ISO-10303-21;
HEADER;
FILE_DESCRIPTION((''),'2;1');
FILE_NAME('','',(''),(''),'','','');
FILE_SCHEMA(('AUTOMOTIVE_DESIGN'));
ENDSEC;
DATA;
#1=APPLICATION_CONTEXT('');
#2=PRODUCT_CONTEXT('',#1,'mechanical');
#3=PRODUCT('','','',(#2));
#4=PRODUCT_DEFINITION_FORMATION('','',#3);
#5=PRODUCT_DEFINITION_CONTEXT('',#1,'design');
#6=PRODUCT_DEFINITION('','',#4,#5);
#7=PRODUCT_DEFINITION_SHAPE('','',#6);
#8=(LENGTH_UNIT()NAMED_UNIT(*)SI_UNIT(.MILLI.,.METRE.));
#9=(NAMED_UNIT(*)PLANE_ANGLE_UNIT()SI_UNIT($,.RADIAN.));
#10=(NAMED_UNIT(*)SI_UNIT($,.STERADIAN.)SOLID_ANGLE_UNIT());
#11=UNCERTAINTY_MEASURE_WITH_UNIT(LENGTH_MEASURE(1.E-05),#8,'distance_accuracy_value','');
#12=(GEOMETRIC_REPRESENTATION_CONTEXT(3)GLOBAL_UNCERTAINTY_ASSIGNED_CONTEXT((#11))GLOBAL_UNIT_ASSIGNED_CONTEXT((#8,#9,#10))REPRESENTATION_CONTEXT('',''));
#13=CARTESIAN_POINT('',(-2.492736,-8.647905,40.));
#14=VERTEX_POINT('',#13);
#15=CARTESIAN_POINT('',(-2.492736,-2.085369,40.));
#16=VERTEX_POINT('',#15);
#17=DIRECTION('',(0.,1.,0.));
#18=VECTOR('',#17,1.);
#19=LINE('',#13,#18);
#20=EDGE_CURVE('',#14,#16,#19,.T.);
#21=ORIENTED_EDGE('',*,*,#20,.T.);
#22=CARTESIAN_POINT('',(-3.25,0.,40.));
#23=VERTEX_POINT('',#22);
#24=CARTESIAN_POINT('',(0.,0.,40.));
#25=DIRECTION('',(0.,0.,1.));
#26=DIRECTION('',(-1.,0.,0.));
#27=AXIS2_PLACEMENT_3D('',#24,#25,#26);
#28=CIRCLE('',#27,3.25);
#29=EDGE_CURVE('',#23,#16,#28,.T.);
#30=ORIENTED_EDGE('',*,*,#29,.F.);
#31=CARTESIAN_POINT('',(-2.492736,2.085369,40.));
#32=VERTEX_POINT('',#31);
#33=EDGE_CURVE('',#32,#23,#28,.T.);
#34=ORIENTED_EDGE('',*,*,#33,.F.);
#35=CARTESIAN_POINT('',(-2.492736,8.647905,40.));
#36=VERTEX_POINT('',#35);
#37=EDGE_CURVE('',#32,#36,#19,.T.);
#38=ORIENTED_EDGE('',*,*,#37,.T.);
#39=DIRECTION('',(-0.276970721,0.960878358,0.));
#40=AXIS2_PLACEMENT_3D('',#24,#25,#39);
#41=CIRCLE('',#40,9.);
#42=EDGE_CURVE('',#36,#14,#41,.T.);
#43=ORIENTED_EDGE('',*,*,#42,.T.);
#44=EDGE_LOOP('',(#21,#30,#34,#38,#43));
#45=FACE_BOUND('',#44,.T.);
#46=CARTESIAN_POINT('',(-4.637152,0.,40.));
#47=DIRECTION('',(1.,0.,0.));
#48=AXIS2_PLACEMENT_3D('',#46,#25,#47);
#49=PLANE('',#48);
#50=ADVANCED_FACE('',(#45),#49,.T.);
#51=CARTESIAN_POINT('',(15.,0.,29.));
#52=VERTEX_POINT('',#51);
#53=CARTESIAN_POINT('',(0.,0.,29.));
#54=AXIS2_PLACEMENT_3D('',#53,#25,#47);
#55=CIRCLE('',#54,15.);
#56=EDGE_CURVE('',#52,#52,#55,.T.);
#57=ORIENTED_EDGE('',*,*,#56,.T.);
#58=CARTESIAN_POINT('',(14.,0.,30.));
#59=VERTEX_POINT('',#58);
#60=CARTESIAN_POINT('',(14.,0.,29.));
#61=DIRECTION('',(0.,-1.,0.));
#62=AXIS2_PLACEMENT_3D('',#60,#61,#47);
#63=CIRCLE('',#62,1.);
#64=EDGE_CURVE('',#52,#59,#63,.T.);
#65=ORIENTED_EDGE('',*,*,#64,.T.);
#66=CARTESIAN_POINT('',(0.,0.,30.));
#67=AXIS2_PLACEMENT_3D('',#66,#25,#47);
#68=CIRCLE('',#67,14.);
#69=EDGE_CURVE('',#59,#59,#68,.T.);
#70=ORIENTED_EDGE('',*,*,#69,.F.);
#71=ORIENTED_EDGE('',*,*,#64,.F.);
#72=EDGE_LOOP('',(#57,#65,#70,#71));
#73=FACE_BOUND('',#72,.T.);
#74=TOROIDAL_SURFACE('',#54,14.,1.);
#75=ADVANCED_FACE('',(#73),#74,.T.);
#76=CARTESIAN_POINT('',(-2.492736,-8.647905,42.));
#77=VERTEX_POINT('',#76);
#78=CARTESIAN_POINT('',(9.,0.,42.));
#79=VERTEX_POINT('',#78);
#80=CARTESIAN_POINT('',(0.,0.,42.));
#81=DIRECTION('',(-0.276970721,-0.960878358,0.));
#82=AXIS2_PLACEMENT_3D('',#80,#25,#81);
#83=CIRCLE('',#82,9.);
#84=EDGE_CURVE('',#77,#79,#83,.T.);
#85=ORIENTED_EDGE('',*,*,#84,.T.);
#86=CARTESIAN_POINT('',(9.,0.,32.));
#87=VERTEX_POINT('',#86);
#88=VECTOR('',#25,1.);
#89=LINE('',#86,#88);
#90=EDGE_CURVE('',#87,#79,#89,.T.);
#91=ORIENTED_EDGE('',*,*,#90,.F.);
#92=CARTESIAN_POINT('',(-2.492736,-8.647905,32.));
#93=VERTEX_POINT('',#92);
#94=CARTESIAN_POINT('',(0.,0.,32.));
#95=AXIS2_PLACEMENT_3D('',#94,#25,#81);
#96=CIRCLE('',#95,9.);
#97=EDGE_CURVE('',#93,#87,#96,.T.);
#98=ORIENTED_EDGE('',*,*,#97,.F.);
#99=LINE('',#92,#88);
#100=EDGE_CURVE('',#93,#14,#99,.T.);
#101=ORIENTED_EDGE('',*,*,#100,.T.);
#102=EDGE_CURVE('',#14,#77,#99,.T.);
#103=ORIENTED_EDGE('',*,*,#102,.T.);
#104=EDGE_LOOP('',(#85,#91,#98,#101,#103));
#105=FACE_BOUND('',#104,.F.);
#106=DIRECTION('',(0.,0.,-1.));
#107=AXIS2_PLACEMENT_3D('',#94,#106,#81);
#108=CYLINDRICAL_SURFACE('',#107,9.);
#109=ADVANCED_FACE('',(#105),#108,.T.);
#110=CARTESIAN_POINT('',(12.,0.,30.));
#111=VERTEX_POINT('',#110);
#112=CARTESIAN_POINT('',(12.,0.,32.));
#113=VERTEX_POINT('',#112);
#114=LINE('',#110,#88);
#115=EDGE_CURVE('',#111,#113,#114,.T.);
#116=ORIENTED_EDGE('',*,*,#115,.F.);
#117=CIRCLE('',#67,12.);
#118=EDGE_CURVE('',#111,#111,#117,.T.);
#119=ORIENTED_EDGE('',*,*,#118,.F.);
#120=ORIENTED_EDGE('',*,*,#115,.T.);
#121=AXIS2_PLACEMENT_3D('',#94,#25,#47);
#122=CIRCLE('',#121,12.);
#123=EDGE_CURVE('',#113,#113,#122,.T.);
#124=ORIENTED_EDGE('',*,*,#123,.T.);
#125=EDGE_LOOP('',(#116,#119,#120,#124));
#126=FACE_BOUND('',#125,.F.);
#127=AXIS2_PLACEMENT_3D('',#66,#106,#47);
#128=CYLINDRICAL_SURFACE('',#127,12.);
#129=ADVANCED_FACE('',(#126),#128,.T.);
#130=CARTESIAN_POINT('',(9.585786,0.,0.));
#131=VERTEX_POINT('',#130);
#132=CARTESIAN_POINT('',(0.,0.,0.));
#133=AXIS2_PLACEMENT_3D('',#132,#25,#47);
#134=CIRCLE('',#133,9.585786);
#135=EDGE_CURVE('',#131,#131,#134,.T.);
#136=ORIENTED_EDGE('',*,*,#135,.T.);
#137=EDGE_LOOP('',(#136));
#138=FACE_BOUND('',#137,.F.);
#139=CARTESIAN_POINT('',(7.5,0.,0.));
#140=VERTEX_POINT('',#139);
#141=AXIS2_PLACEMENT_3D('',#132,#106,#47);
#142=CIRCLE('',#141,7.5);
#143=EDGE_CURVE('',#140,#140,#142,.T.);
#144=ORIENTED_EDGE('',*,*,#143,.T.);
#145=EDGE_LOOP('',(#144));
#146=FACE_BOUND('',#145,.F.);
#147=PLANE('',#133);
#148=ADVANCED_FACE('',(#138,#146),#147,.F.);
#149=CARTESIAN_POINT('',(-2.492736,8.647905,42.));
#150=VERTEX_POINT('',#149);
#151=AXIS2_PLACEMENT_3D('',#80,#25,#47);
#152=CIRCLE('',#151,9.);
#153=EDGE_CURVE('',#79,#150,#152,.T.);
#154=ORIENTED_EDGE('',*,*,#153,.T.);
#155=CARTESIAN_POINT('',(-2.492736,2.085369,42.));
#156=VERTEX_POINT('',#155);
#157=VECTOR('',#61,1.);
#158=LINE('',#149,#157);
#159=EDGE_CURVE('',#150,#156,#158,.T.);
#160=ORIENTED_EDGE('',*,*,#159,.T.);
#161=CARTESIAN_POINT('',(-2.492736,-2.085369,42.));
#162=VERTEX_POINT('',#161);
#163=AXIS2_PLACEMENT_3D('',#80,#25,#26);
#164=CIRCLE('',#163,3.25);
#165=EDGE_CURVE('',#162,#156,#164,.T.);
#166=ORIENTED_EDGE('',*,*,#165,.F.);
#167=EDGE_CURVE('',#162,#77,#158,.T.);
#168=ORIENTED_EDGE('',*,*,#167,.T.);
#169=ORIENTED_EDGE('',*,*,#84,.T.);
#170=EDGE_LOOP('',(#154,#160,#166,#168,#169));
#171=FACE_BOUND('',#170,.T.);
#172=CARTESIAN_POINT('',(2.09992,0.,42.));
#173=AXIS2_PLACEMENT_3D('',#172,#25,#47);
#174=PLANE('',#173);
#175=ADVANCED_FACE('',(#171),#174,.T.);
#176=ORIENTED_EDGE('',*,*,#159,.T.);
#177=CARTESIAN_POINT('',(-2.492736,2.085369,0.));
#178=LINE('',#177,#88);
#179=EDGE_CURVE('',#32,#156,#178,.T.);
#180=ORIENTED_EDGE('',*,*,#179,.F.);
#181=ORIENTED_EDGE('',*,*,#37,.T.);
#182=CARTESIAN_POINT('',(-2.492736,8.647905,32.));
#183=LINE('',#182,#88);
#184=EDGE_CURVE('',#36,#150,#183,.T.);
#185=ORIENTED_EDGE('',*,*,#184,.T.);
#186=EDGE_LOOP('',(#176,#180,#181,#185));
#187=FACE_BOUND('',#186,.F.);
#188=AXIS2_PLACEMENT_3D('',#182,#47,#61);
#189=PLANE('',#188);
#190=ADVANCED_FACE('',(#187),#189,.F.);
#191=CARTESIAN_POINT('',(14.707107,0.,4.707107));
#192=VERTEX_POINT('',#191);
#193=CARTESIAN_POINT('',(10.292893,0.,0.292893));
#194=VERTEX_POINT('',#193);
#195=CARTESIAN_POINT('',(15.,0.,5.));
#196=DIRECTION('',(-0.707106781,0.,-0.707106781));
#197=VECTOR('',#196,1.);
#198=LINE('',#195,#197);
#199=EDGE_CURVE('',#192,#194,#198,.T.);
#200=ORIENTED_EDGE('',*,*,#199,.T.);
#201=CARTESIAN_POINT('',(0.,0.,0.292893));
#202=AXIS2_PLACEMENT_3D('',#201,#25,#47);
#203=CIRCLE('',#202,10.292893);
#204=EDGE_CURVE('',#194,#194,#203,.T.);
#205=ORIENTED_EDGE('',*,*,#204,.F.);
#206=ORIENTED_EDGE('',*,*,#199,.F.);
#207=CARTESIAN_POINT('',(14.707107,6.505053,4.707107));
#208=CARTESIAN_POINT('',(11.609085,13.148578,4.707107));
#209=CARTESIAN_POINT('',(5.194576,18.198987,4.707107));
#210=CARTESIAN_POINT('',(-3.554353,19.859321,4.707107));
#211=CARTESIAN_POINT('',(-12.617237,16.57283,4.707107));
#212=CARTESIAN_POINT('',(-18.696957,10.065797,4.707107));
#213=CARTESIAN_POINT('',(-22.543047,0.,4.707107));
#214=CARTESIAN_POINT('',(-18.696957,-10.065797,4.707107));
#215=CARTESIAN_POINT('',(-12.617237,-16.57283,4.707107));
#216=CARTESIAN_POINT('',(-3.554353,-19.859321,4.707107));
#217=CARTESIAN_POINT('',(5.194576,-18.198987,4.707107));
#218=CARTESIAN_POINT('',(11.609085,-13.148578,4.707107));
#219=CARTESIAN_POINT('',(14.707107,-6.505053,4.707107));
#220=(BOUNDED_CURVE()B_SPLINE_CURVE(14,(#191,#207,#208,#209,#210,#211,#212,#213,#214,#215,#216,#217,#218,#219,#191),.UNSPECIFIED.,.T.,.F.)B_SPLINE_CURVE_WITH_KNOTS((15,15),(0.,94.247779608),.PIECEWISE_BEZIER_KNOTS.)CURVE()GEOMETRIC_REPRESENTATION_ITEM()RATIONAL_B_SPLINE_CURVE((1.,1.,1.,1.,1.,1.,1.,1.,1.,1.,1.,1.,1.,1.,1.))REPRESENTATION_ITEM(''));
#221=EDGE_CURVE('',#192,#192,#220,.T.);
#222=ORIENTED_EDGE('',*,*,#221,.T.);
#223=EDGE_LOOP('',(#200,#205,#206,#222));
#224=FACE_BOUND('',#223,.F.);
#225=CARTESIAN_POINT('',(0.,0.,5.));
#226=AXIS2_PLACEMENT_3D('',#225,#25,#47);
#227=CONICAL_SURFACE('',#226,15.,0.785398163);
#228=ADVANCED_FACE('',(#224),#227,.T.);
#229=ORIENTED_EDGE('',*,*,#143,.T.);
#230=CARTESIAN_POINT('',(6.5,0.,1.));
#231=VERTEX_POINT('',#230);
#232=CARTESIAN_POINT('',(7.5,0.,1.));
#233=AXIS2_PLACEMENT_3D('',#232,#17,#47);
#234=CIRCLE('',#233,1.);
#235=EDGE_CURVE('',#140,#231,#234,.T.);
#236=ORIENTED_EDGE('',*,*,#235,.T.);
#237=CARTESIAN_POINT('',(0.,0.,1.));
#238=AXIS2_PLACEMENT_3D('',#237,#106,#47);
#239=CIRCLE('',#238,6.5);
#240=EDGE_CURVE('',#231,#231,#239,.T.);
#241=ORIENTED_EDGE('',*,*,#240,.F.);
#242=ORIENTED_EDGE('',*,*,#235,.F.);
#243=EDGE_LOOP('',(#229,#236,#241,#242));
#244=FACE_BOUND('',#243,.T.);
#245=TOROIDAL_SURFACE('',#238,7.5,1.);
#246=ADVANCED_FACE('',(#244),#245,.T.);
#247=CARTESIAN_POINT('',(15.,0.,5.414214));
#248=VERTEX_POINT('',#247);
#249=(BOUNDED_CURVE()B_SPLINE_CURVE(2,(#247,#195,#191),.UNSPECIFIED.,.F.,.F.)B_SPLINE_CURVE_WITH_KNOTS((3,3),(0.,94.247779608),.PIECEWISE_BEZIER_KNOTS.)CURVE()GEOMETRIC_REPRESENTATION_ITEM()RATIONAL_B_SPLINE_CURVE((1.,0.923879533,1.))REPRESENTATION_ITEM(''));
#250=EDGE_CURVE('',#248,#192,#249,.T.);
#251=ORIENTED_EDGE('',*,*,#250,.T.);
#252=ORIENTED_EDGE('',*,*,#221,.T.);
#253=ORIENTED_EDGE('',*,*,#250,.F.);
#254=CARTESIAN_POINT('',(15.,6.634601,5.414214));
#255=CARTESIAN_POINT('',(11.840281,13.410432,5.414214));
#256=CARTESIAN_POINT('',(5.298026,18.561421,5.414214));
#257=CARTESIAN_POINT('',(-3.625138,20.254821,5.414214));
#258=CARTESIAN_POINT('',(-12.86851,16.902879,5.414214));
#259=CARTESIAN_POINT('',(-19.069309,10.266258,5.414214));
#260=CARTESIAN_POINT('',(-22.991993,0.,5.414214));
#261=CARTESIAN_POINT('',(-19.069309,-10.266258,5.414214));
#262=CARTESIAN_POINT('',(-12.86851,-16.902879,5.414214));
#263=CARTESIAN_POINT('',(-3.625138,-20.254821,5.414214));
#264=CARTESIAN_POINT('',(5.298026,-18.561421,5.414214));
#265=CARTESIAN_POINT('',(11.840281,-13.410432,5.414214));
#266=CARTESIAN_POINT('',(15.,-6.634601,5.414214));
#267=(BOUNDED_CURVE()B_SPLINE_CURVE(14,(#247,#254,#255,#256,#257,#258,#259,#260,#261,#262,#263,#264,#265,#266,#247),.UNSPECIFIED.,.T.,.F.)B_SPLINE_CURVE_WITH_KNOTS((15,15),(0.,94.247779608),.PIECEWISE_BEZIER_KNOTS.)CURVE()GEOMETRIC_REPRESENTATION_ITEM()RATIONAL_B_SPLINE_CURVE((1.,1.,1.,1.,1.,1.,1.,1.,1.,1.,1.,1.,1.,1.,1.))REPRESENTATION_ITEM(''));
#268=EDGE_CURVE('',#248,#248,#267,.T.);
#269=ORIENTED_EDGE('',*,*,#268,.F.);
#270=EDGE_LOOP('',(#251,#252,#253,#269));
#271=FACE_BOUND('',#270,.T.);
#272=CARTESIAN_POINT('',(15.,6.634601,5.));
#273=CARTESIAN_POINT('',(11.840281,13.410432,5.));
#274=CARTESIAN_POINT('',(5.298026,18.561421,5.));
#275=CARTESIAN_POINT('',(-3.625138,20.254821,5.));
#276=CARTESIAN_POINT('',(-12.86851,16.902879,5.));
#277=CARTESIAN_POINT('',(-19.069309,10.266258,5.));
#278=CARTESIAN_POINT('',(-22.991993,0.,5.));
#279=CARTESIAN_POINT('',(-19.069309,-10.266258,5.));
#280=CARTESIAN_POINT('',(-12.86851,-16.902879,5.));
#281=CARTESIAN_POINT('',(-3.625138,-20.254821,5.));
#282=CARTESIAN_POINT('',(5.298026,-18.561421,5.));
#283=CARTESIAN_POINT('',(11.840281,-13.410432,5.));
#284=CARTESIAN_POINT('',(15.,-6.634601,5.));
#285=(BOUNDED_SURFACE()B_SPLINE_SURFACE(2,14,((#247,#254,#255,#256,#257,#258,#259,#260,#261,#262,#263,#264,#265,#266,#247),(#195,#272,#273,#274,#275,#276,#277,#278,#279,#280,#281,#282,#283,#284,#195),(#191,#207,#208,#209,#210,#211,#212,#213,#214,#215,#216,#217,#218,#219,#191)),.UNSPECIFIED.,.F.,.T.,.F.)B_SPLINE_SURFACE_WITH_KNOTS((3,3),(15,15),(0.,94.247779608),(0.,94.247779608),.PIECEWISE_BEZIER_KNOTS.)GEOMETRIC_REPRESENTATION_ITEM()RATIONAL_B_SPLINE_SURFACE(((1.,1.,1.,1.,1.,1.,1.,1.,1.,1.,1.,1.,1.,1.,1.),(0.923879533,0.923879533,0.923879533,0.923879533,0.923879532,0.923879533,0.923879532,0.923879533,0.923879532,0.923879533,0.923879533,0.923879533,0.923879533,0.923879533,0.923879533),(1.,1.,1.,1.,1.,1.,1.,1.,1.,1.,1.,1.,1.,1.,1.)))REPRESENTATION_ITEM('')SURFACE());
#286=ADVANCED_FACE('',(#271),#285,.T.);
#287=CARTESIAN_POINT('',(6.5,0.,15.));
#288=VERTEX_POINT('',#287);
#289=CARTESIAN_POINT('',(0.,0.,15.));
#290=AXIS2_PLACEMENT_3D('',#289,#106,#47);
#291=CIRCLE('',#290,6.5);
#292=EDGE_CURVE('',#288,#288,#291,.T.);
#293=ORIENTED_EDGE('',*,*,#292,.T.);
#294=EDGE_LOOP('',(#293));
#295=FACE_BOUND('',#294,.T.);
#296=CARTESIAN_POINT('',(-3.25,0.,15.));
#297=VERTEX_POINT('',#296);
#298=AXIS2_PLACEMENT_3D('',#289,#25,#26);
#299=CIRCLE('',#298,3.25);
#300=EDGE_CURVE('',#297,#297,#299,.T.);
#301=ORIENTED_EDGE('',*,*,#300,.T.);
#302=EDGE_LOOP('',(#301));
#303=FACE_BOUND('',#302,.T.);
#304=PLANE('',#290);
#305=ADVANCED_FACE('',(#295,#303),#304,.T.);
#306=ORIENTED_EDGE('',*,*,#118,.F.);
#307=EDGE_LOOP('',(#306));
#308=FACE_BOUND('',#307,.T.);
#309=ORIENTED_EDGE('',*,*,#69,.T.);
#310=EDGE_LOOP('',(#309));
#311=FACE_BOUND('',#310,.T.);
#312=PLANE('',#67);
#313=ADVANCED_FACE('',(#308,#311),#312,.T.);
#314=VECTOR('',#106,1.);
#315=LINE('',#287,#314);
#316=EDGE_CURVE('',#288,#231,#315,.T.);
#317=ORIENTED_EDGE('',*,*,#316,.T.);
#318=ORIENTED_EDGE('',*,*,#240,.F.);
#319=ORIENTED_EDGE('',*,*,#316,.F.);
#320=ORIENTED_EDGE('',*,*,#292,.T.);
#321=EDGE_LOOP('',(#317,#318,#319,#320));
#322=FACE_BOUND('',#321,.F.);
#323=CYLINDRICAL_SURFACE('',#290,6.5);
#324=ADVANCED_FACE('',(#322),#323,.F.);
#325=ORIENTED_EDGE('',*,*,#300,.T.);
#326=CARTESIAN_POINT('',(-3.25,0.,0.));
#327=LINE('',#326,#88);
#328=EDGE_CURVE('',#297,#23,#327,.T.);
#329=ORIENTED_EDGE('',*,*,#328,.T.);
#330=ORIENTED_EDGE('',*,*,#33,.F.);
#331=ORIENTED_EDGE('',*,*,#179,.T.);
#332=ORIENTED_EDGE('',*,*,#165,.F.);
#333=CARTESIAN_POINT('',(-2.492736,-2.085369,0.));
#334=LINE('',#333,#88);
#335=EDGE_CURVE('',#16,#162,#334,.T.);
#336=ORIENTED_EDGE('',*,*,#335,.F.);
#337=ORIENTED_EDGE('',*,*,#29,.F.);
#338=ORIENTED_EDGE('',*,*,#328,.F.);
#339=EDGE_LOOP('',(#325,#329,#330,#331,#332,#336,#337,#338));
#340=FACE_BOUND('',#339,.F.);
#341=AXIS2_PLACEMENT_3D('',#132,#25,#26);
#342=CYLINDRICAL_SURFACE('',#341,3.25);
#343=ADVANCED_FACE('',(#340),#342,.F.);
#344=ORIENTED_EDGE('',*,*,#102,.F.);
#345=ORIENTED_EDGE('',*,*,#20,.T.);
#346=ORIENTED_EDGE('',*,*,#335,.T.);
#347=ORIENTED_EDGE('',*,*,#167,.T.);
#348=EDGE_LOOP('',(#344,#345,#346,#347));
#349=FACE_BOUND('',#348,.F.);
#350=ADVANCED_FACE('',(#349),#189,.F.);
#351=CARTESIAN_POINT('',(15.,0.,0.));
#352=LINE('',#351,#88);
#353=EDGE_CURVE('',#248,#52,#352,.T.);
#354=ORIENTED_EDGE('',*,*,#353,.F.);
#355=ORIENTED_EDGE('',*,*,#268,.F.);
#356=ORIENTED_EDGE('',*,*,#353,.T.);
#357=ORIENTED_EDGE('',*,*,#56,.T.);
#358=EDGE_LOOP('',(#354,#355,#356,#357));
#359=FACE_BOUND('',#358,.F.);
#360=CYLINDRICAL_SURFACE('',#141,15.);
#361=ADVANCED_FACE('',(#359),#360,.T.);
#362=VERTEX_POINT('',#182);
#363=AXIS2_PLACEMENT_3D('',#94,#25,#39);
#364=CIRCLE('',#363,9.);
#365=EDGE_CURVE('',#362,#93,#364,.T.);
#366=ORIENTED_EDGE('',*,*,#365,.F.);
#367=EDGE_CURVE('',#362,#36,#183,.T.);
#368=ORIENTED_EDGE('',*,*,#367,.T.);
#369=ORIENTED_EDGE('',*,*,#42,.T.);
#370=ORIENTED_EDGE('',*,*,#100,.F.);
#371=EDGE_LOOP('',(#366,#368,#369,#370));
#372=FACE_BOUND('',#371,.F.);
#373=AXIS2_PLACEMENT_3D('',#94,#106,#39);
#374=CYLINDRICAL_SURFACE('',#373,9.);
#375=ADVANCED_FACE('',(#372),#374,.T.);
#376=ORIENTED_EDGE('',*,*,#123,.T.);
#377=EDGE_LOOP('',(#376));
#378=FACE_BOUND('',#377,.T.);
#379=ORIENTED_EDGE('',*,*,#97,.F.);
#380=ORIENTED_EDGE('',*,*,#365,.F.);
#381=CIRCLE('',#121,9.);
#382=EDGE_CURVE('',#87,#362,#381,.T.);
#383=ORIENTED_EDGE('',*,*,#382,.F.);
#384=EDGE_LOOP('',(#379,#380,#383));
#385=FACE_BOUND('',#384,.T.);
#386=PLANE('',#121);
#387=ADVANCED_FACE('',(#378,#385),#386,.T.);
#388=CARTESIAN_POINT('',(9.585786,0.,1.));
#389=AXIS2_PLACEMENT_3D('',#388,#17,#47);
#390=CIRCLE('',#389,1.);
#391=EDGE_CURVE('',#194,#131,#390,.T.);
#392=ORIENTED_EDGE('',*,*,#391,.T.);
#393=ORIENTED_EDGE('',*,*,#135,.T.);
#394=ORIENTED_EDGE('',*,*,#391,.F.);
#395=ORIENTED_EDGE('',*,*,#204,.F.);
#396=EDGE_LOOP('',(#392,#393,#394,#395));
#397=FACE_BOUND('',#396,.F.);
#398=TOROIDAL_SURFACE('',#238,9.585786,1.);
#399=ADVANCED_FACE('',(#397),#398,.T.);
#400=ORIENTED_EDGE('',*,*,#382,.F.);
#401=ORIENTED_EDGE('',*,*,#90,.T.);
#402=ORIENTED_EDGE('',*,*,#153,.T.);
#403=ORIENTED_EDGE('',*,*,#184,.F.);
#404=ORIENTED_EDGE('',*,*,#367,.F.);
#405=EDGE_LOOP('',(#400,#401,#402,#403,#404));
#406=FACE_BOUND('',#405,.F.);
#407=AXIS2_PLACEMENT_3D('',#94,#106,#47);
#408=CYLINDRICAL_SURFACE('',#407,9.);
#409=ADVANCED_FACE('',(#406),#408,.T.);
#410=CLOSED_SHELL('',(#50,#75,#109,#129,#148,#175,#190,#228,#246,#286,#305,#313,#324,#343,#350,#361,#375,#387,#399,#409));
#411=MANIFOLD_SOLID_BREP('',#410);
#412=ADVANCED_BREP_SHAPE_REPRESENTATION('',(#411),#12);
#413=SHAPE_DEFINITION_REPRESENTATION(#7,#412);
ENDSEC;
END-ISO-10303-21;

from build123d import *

# Parameters (mm, degrees)
F0_R           = 15
F1_DEPTH       = 30
F2_R           = 12
F3_DEPTH       = 2
F5_DEPTH       = 10
F6_DEPTH       = 8
F7_D           = 6.5
F7_CBORE_D     = 13
F7_CBORE_DEPTH = 15
F8_SIZE        = 5
F9_R           = 1


with BuildPart() as f1:
    # F0 (on Top) → F1 (new body)
    with BuildSketch(Plane.XY):
        Circle(F0_R)
    extrude(amount=F1_DEPTH)

    # F2 (on face) → F3 (join)
    with BuildSketch(Plane.XY.offset(30)):
        Circle(F2_R)
    extrude(amount=F3_DEPTH)

    # F4 (on face) → F5 (join)
    with BuildSketch(Plane.XY.offset(32)):
        with BuildLine():
            ThreePointArc((-2.492736493, -8.6479052248), (5.411347871, -7.1914751073), (9, 0))
            ThreePointArc((9, 0), (5.411347871, 7.1914751073), (-2.492736493, 8.6479052248))
            Line((-2.492736493, 8.6479052248), (-2.492736493, -8.6479052248))
        make_face()
    extrude(amount=F5_DEPTH)

    # F4 (on face) → F6 (join)
    with BuildSketch(Plane.XY.offset(32)):
        with BuildLine():
            Line((-2.492736493, -8.6479052248), (-2.492736493, 8.6479052248))
            ThreePointArc((-2.492736493, 8.6479052248), (-9, 0), (-2.492736493, -8.6479052248))
        make_face()
    extrude(amount=F6_DEPTH)

    # F7 (through all)
    with Locations(Plane(origin=(0, 0, 0), x_dir=(1, 0, 0), z_dir=(0, 0, -1))):
        with Locations((0, 0)):
            CounterBoreHole(F7_D / 2, F7_CBORE_D / 2, F7_CBORE_DEPTH)

    # F8
    f8_edges = [f1.edges().sort_by_distance(p)[0] for p in [
        (-15, 0, 0),
    ]]
    chamfer(f8_edges, length=F8_SIZE)

    # F9
    f9_edges = [f1.edges().sort_by_distance(p)[0] for p in [
        (-15, 0, 30),
        (-10, 0, 0),
        (-15, 0, 5),
        (-6.5, 0, 0),
    ]]
    fillet(f9_edges, radius=F9_R)


solid = f1.part
